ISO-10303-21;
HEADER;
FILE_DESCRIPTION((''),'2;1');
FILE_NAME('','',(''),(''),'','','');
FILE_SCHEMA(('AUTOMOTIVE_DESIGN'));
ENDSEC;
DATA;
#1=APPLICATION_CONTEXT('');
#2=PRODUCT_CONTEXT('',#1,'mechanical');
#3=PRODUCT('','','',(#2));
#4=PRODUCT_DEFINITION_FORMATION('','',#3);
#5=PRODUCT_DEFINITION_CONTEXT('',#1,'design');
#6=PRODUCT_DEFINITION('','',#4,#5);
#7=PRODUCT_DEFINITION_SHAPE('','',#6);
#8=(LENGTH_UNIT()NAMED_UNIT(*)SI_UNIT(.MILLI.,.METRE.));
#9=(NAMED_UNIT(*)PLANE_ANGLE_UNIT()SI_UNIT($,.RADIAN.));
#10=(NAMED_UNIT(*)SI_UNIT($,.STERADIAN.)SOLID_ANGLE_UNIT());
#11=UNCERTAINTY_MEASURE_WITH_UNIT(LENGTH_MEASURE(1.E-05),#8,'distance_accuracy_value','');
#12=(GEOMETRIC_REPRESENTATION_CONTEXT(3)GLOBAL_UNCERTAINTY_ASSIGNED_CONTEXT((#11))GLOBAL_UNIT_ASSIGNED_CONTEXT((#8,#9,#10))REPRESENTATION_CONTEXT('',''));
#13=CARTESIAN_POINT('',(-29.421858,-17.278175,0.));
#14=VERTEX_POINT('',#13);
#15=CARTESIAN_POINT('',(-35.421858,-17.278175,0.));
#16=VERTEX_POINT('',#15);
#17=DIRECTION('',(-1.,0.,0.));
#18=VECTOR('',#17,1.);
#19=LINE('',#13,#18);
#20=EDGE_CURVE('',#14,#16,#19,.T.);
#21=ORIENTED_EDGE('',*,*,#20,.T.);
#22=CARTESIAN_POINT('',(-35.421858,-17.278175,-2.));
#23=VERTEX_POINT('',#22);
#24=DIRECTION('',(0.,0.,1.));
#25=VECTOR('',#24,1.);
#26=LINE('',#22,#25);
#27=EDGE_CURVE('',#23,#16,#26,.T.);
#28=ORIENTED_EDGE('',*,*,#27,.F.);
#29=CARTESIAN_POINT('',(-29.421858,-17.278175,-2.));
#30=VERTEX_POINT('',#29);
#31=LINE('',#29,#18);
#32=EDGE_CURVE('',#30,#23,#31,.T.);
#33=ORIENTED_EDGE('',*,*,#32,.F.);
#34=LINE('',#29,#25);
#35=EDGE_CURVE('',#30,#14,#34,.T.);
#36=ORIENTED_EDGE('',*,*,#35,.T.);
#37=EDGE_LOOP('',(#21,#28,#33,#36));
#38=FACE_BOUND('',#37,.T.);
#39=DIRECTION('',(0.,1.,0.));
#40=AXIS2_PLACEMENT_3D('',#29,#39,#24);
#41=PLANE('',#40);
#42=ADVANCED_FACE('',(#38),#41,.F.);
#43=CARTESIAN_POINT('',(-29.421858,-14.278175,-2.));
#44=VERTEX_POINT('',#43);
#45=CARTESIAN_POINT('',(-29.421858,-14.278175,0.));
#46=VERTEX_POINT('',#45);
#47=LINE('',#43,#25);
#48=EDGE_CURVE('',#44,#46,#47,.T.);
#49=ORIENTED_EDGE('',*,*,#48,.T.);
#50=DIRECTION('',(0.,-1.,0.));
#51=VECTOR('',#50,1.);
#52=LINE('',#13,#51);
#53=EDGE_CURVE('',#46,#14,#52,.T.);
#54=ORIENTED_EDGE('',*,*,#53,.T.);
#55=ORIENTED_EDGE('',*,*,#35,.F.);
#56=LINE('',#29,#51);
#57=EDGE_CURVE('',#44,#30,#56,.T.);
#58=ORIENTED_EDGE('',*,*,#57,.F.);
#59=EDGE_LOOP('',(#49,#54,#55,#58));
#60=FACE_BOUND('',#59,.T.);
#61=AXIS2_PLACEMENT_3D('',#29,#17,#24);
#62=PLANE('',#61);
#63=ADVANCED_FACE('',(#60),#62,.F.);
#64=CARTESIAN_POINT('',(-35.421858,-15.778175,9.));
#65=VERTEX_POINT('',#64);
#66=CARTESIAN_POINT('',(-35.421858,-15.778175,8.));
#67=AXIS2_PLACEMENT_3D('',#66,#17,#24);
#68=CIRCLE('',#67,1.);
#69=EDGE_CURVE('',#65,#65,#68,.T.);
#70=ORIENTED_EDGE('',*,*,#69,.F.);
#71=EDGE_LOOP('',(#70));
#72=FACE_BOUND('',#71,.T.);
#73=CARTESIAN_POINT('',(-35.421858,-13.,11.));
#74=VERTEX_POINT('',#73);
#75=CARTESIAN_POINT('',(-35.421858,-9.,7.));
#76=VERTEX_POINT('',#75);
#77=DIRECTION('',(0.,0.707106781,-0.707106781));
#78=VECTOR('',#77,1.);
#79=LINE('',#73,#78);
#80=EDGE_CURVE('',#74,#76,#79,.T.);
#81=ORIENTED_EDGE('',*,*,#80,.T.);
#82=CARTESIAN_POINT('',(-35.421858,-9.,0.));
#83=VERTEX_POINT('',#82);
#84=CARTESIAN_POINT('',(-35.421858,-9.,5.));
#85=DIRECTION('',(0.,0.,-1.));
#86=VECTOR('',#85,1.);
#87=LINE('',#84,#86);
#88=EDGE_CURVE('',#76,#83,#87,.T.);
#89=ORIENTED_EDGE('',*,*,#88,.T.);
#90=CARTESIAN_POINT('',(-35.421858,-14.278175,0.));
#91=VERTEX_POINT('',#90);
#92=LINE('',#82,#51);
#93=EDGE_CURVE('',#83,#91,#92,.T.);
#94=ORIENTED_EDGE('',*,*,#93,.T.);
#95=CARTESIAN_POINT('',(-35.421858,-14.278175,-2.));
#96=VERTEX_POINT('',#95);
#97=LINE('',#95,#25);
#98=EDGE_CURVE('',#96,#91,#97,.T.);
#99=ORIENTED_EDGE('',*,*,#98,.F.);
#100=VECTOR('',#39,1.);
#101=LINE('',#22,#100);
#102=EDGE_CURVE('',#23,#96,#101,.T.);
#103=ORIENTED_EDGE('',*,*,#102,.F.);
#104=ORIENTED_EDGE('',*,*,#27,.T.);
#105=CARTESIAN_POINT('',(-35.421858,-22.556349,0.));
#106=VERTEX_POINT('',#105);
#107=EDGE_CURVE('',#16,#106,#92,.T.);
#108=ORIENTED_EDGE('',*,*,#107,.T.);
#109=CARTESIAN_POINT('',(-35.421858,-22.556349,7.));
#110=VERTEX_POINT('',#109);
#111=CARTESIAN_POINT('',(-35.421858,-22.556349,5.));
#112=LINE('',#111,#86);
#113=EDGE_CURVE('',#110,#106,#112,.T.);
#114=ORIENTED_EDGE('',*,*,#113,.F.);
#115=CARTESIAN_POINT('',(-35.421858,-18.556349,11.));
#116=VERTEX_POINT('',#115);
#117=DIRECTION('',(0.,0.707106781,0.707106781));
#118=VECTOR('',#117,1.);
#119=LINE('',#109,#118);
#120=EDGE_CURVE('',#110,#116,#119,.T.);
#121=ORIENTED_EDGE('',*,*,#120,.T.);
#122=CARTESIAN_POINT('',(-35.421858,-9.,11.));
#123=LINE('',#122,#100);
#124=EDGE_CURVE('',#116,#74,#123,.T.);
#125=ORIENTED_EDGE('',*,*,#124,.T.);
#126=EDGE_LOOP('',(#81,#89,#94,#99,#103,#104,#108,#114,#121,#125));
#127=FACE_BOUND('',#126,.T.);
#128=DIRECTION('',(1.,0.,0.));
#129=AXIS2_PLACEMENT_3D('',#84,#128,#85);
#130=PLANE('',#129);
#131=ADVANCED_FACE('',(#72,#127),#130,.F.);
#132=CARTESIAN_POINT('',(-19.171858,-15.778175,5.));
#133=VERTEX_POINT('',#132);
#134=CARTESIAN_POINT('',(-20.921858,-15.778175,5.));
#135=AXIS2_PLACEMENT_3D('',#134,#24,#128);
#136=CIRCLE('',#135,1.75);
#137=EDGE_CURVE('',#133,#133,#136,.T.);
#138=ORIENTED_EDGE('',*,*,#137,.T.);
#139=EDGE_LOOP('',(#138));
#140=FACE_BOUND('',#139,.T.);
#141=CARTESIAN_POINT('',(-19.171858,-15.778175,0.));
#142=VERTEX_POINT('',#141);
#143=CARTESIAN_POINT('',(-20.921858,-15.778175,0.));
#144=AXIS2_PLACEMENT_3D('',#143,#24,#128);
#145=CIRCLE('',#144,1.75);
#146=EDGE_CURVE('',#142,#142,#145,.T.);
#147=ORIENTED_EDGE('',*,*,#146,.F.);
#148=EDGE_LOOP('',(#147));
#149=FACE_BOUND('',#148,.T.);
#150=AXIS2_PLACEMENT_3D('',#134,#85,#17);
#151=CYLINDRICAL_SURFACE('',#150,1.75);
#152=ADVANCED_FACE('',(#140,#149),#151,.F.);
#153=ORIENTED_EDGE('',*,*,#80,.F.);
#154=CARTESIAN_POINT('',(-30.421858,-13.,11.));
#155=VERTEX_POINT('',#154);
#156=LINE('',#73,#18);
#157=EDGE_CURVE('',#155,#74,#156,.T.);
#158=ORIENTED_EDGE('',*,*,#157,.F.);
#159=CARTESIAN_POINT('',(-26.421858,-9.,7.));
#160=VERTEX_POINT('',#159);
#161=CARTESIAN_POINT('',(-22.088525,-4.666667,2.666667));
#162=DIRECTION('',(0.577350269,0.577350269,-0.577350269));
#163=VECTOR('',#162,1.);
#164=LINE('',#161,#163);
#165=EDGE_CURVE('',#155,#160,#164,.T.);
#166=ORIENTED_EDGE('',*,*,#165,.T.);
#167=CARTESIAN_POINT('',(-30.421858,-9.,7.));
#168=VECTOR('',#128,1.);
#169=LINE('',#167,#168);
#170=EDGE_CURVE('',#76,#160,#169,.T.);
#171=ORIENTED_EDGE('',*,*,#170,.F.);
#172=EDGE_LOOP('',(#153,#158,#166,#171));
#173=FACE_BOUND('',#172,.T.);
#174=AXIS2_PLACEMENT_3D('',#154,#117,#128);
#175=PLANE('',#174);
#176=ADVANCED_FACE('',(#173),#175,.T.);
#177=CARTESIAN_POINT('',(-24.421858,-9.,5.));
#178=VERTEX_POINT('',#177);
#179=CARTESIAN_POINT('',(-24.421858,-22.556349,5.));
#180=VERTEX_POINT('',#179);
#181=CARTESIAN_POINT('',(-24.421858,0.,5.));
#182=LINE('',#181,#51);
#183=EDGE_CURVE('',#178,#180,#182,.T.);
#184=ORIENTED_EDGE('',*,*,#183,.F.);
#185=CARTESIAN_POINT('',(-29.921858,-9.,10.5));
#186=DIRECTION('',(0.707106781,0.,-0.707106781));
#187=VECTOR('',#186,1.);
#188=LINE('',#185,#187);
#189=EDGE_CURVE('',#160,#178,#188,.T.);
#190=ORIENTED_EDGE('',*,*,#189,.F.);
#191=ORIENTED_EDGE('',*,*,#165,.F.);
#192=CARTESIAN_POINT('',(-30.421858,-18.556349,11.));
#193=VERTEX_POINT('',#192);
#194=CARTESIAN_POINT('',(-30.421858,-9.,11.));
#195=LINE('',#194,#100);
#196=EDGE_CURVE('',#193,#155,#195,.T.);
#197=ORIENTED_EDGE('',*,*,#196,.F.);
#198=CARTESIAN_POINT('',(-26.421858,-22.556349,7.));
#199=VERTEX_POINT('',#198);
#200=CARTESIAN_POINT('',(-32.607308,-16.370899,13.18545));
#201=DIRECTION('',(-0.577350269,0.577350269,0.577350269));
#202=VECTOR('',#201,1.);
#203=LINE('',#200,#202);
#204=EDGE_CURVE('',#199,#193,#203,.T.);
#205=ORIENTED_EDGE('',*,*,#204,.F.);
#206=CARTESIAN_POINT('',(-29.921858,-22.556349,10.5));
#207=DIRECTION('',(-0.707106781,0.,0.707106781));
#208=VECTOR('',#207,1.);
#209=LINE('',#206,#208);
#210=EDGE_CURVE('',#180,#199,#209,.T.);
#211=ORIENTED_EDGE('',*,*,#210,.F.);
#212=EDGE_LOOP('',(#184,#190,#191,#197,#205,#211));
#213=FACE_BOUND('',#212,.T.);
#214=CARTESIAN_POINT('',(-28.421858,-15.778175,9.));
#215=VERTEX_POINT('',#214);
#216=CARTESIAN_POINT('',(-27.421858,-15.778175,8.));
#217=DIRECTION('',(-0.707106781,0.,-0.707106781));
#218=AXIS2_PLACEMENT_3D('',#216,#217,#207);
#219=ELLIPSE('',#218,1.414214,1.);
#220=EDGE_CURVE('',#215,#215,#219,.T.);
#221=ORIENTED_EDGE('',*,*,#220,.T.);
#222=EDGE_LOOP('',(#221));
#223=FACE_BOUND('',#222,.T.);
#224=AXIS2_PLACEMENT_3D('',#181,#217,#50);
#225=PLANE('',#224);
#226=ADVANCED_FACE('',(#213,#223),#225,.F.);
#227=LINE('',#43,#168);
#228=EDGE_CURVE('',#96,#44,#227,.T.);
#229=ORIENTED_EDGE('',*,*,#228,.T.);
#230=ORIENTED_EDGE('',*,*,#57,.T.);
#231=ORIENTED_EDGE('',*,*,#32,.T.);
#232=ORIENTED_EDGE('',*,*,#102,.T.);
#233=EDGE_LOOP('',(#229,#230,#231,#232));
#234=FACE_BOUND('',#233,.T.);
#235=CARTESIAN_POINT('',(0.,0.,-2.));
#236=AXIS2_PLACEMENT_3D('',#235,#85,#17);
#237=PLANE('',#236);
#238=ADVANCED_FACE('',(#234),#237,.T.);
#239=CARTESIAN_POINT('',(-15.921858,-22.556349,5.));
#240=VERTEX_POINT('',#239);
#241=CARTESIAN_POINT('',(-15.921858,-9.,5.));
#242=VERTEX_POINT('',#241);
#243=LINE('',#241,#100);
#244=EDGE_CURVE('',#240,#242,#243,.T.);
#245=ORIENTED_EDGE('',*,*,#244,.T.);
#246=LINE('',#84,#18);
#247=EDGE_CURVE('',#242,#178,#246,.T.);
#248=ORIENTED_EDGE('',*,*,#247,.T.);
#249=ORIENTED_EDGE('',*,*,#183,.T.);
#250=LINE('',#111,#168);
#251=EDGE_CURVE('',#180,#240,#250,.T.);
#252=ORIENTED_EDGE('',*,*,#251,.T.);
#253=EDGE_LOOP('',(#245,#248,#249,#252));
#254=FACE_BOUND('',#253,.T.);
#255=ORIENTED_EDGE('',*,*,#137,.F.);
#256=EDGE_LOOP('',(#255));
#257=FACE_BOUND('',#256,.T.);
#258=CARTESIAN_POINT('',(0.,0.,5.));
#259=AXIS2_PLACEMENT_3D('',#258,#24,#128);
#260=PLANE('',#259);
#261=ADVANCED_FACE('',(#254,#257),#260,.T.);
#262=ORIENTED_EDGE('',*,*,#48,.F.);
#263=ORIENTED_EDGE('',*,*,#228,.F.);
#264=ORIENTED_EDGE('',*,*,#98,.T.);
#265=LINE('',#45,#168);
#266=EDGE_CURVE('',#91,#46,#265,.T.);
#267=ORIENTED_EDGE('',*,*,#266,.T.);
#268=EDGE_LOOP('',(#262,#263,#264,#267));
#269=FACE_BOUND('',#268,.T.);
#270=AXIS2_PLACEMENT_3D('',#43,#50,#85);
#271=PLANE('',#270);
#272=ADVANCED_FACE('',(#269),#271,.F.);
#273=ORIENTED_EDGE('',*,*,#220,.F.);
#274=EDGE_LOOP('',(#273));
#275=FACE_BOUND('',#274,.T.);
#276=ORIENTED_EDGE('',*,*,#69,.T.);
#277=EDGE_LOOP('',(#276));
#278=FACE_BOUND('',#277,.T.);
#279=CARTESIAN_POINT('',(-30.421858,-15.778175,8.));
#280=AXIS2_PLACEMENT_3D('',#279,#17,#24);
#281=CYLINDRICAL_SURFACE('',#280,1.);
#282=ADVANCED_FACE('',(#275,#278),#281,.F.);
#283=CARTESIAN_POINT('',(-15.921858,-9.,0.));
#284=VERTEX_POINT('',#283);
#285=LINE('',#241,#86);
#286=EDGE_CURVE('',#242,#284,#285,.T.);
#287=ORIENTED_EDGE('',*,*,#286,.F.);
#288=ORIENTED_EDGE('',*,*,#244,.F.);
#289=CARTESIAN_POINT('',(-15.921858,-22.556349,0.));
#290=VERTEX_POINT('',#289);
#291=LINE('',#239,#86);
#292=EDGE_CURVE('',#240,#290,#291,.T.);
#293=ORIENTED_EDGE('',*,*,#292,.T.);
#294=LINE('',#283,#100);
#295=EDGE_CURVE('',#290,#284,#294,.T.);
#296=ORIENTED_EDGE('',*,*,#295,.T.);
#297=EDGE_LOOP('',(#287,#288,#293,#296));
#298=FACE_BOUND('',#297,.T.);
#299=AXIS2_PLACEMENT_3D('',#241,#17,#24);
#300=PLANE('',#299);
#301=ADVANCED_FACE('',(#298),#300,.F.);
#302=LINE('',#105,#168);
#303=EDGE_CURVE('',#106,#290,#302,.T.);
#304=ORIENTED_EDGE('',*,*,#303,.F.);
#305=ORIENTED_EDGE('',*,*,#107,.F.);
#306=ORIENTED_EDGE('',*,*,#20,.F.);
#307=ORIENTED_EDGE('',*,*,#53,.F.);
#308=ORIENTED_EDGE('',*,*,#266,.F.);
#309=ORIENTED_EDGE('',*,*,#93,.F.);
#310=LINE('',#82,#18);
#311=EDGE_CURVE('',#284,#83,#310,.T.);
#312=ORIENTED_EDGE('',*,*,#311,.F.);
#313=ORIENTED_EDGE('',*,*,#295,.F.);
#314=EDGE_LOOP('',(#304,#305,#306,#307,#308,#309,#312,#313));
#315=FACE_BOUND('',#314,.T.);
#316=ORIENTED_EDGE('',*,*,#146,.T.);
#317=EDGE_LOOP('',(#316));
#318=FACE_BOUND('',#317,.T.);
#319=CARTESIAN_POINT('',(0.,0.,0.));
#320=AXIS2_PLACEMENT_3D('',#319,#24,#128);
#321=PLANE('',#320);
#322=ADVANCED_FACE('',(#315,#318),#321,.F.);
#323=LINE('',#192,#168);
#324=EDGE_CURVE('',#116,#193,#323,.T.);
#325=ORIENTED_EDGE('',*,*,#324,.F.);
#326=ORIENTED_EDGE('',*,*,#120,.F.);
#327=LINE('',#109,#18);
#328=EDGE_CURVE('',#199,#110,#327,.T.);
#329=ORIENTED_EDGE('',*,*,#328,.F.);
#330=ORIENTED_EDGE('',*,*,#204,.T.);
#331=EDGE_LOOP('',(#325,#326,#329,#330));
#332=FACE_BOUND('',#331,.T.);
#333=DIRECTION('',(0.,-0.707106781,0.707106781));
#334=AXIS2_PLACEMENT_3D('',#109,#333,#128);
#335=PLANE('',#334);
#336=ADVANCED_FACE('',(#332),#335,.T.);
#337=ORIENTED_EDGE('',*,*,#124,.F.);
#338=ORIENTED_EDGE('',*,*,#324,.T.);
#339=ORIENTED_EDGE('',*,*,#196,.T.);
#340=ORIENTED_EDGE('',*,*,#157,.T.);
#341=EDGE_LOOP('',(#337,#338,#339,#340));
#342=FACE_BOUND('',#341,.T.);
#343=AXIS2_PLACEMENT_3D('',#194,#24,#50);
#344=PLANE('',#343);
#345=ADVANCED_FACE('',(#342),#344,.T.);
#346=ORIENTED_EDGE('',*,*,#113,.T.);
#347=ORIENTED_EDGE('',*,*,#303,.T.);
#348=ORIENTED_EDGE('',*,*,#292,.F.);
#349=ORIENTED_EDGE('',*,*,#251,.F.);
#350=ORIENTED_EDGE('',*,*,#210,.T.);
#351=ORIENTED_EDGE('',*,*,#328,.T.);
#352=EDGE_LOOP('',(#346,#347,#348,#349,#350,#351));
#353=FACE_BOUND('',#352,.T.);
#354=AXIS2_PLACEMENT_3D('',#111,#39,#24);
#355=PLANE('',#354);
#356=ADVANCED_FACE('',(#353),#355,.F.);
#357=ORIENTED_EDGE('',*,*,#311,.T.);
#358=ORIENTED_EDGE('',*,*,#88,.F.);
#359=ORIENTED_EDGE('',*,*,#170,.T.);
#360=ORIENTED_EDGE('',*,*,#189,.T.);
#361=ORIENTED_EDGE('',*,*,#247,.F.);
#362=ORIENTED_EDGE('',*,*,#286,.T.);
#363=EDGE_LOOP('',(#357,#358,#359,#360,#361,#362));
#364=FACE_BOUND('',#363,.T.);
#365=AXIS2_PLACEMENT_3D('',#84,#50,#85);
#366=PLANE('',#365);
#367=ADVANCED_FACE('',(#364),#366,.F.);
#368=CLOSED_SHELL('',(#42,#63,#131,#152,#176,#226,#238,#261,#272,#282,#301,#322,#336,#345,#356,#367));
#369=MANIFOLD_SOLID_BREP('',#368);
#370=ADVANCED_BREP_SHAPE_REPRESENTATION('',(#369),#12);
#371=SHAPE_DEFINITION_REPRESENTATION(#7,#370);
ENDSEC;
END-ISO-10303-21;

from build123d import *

# Parameters (mm, degrees)
SKETCH1_W           = 19.5
SKETCH1_H           = 13.556349186
SKETCH1_R           = 1.75
BOSS_EXTRUDE1_DEPTH = 5
SKETCH2_W           = 6
SKETCH2_H           = 3
BOSS_EXTRUDE2_DEPTH = 2
SKETCH3_W           = 6
SKETCH3_H           = 13.556349186
SKETCH3_R           = 1
BOSS_EXTRUDE3_DEPTH = 5
CHAMFER1_SIZE       = 4
CHAMFER2_SIZE       = 6


with BuildPart() as part:
    # Sketch1 → Boss-Extrude1 (new body)
    with BuildSketch(Plane.XY):
        with Locations((-25.671858451, -15.778174593)):
            Rectangle(SKETCH1_W, SKETCH1_H)
        with Locations((-20.921858451, -15.778174593)):
            Circle(SKETCH1_R, mode=Mode.SUBTRACT)
    extrude(amount=BOSS_EXTRUDE1_DEPTH)

    # Sketch2 → Boss-Extrude2 (add)
    with BuildSketch(Plane(origin=(0, 0, 0), x_dir=(-1, 0, 0), z_dir=(0, 0, -1))):
        with Locations((32.421858451, -15.778174593)):
            Rectangle(SKETCH2_W, SKETCH2_H)
    extrude(amount=BOSS_EXTRUDE2_DEPTH)

    # Sketch3 → Boss-Extrude3 (add)
    with BuildSketch(Plane.ZY.offset(35.421858451)):
        with Locations((8, -15.778174593)):
            Rectangle(SKETCH3_W, SKETCH3_H)
        with Locations((8, -15.778174593)):
            Circle(SKETCH3_R, mode=Mode.SUBTRACT)
    extrude(amount=-BOSS_EXTRUDE3_DEPTH)

    # Chamfer1
    chamfer1_edges = [part.edges().sort_by_distance(p)[0] for p in [
        (-32.921858451, -9, 11),
        (-32.921858451, -22.556349186, 11),
    ]]
    chamfer(chamfer1_edges, length=CHAMFER1_SIZE)

    # Chamfer2
    # the kernel refuses this chamfer: 6 mm, written as the material it adds along each edge
    with BuildSketch(Plane(origin=(-30.421858451, -22.556349186, 5), x_dir=(-0.0274958766105862, 0, 0.9996219169112968), z_dir=(0, 1, 0))) as chamfer2_piece_1_section:
        Polygon((CHAMFER2_SIZE * 0.999621916911, CHAMFER2_SIZE * 0.0274958766106), (-CHAMFER2_SIZE * 0.0274958766106, CHAMFER2_SIZE * 0.999621916911), (0, 0), align=None)
    chamfer2_piece_1 = extrude(amount=13.556349186, mode=Mode.PRIVATE)
    chamfer2_piece_1 = split(chamfer2_piece_1, bisect_by=Plane(origin=(-28.301106776, -12.243149914, 10.243149914), z_dir=(0, -0.7071067811865477, -0.7071067811865474)), keep=Keep.TOP, mode=Mode.PRIVATE)
    chamfer2_piece_1 = split(chamfer2_piece_1, bisect_by=Plane(origin=(-28.301106776, -15.778174309, 11), z_dir=(0, 0, -1)), keep=Keep.TOP, mode=Mode.PRIVATE)
    chamfer2_piece_1 = split(chamfer2_piece_1, bisect_by=Plane(origin=(-28.301106776, -19.313198988, 10.243150199), z_dir=(0, 0.7071067811865474, -0.7071067811865477)), keep=Keep.TOP, mode=Mode.PRIVATE)
    chamfer2_piece_1 = chamfer2_piece_1 - Plane(origin=(-28.301106776, -15.778174593, 8), x_dir=(0, 0, 1), z_dir=(-1, 0, 0)) * Cylinder(1, 52, mode=Mode.PRIVATE)
    add(chamfer2_piece_1)


solid = part.part
